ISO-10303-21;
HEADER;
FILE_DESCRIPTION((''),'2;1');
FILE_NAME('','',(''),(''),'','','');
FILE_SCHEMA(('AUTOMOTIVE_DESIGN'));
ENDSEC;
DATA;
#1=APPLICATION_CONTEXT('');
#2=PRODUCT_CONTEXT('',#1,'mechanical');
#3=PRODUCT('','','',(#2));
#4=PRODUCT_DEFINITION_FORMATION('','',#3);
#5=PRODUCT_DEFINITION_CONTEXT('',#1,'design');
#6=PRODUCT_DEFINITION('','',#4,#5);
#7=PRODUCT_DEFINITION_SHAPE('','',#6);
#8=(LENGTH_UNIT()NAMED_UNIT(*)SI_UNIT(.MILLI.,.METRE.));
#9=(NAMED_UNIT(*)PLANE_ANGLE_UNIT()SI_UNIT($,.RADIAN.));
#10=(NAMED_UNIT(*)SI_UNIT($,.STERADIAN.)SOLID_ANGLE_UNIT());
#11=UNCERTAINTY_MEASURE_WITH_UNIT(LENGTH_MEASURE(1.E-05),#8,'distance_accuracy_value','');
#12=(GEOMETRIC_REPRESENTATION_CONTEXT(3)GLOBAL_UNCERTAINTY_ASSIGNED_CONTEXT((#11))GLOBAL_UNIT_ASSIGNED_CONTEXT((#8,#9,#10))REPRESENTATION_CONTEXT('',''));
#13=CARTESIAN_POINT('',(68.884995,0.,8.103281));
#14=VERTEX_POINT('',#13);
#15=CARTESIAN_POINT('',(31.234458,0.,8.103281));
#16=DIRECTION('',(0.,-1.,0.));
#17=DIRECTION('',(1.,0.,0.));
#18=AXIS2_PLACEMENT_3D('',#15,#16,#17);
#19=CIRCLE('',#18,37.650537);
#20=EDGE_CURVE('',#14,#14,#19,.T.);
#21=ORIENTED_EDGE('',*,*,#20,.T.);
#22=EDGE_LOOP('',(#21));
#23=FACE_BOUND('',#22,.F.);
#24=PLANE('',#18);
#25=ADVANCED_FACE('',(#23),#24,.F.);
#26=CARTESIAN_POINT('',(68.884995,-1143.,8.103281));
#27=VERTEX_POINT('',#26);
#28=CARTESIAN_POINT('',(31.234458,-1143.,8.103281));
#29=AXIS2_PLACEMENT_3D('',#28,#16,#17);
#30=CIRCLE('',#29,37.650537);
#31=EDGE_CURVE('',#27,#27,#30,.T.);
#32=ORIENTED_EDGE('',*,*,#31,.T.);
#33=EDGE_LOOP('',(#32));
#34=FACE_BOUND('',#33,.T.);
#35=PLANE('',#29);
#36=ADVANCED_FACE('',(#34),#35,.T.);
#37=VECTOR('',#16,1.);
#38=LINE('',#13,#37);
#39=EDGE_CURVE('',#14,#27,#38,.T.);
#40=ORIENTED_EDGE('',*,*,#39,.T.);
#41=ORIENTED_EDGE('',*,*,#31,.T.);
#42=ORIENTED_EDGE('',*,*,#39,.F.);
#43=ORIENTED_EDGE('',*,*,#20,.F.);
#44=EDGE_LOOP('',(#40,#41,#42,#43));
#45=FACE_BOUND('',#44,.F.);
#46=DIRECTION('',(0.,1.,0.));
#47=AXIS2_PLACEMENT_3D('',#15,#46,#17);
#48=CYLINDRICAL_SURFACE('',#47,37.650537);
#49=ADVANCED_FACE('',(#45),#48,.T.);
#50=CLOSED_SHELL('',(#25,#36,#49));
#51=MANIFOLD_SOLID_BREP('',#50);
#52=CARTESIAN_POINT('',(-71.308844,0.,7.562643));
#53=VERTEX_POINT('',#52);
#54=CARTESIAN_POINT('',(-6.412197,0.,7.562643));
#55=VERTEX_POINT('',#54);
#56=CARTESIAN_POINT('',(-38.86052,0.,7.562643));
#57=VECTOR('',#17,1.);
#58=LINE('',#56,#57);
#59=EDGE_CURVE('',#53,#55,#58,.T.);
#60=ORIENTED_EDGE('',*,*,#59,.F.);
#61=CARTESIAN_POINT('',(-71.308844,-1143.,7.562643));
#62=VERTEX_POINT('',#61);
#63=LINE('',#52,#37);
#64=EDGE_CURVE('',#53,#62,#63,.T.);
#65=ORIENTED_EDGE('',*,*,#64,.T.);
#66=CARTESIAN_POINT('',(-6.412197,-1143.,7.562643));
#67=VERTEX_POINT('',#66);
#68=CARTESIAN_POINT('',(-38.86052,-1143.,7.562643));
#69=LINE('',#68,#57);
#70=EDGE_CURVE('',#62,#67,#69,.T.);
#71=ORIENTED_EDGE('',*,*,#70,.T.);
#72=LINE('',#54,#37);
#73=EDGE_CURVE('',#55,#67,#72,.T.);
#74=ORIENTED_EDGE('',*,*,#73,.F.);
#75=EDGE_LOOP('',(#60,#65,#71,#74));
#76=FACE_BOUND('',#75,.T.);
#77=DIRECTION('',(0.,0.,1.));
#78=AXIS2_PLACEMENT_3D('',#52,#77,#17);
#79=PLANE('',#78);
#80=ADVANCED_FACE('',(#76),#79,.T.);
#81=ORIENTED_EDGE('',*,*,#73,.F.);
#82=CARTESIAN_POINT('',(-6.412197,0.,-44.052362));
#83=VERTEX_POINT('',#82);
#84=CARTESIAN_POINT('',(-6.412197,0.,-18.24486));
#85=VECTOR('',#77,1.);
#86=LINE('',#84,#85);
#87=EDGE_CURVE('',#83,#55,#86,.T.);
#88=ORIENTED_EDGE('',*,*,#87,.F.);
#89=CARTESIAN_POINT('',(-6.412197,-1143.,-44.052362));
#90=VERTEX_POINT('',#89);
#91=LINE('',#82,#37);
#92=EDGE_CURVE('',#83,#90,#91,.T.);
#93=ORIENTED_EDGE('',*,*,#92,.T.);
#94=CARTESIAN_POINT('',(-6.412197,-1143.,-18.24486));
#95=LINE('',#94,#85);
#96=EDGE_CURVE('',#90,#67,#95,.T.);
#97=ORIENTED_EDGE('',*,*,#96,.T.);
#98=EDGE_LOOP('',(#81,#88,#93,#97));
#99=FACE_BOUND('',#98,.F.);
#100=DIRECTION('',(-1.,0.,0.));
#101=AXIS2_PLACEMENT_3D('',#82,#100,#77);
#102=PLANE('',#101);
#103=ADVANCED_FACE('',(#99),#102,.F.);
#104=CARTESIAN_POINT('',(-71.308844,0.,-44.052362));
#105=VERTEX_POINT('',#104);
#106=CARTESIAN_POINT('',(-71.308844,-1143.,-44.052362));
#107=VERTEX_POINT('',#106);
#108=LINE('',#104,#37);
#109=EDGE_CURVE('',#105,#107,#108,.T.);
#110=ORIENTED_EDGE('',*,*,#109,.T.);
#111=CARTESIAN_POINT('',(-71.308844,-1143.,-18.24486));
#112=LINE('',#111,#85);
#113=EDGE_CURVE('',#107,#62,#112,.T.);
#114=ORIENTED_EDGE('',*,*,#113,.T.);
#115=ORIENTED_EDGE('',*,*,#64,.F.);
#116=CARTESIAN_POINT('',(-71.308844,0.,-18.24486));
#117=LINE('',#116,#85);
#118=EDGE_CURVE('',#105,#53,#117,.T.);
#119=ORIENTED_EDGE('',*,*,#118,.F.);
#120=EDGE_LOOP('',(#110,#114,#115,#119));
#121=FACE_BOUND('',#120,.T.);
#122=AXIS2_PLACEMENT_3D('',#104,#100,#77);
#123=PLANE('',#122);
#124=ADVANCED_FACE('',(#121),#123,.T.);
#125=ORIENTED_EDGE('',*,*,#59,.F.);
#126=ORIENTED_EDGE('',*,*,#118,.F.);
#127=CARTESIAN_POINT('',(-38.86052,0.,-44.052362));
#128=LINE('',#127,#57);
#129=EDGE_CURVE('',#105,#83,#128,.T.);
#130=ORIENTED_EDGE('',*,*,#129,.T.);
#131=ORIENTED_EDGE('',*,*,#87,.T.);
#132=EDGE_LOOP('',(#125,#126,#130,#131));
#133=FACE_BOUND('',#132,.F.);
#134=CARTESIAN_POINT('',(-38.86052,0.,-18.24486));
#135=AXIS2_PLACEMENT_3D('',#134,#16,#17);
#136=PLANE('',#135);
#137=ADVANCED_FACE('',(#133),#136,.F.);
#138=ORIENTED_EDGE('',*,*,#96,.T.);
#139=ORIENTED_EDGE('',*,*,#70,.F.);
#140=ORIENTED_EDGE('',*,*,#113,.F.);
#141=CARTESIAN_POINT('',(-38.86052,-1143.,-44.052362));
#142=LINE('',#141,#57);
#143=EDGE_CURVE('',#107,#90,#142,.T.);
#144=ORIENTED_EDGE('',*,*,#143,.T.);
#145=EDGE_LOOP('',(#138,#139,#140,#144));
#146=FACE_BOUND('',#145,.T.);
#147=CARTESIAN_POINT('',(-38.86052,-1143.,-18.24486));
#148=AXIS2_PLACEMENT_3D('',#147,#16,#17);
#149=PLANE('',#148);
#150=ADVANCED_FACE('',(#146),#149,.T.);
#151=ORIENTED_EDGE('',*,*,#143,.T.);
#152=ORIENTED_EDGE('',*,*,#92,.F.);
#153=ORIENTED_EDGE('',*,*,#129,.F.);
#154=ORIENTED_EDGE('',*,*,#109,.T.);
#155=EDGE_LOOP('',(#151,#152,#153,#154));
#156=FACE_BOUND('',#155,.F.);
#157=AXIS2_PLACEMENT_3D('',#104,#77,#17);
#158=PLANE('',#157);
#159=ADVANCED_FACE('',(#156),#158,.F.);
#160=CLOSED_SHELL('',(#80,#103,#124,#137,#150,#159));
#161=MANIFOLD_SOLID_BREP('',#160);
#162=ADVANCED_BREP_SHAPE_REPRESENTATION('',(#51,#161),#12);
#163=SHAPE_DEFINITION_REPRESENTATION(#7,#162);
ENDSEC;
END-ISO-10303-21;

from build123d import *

# Parameters (mm, degrees)
F1_DEPTH = 1143
F0_W     = 64.8966471037
F0_H     = 51.6150052091


with BuildPart() as f1:
    # F0 (on Front) → F1 (new body)
    with BuildSketch(Plane.XZ):
        with BuildLine():
            ThreePointArc((-6.4121966878, 7.5626427671), (31.5047843029, -29.546284868), (68.8849946834, 8.1032812595))
            ThreePointArc((68.8849946834, 8.1032812595), (30.9641318748, 45.7528473871), (-6.4121966878, 7.5626427671))
        make_face()
    extrude(amount=F1_DEPTH)


with BuildPart() as f1b:
    # F0 (on Front) → F1, piece 2 (new body)
    with BuildSketch(Plane.XZ):
        with Locations((-38.8605202396, -18.2448598374)):
            Rectangle(F0_W, F0_H)
    extrude(amount=F1_DEPTH)


solid = Compound([f1.part, f1b.part])
